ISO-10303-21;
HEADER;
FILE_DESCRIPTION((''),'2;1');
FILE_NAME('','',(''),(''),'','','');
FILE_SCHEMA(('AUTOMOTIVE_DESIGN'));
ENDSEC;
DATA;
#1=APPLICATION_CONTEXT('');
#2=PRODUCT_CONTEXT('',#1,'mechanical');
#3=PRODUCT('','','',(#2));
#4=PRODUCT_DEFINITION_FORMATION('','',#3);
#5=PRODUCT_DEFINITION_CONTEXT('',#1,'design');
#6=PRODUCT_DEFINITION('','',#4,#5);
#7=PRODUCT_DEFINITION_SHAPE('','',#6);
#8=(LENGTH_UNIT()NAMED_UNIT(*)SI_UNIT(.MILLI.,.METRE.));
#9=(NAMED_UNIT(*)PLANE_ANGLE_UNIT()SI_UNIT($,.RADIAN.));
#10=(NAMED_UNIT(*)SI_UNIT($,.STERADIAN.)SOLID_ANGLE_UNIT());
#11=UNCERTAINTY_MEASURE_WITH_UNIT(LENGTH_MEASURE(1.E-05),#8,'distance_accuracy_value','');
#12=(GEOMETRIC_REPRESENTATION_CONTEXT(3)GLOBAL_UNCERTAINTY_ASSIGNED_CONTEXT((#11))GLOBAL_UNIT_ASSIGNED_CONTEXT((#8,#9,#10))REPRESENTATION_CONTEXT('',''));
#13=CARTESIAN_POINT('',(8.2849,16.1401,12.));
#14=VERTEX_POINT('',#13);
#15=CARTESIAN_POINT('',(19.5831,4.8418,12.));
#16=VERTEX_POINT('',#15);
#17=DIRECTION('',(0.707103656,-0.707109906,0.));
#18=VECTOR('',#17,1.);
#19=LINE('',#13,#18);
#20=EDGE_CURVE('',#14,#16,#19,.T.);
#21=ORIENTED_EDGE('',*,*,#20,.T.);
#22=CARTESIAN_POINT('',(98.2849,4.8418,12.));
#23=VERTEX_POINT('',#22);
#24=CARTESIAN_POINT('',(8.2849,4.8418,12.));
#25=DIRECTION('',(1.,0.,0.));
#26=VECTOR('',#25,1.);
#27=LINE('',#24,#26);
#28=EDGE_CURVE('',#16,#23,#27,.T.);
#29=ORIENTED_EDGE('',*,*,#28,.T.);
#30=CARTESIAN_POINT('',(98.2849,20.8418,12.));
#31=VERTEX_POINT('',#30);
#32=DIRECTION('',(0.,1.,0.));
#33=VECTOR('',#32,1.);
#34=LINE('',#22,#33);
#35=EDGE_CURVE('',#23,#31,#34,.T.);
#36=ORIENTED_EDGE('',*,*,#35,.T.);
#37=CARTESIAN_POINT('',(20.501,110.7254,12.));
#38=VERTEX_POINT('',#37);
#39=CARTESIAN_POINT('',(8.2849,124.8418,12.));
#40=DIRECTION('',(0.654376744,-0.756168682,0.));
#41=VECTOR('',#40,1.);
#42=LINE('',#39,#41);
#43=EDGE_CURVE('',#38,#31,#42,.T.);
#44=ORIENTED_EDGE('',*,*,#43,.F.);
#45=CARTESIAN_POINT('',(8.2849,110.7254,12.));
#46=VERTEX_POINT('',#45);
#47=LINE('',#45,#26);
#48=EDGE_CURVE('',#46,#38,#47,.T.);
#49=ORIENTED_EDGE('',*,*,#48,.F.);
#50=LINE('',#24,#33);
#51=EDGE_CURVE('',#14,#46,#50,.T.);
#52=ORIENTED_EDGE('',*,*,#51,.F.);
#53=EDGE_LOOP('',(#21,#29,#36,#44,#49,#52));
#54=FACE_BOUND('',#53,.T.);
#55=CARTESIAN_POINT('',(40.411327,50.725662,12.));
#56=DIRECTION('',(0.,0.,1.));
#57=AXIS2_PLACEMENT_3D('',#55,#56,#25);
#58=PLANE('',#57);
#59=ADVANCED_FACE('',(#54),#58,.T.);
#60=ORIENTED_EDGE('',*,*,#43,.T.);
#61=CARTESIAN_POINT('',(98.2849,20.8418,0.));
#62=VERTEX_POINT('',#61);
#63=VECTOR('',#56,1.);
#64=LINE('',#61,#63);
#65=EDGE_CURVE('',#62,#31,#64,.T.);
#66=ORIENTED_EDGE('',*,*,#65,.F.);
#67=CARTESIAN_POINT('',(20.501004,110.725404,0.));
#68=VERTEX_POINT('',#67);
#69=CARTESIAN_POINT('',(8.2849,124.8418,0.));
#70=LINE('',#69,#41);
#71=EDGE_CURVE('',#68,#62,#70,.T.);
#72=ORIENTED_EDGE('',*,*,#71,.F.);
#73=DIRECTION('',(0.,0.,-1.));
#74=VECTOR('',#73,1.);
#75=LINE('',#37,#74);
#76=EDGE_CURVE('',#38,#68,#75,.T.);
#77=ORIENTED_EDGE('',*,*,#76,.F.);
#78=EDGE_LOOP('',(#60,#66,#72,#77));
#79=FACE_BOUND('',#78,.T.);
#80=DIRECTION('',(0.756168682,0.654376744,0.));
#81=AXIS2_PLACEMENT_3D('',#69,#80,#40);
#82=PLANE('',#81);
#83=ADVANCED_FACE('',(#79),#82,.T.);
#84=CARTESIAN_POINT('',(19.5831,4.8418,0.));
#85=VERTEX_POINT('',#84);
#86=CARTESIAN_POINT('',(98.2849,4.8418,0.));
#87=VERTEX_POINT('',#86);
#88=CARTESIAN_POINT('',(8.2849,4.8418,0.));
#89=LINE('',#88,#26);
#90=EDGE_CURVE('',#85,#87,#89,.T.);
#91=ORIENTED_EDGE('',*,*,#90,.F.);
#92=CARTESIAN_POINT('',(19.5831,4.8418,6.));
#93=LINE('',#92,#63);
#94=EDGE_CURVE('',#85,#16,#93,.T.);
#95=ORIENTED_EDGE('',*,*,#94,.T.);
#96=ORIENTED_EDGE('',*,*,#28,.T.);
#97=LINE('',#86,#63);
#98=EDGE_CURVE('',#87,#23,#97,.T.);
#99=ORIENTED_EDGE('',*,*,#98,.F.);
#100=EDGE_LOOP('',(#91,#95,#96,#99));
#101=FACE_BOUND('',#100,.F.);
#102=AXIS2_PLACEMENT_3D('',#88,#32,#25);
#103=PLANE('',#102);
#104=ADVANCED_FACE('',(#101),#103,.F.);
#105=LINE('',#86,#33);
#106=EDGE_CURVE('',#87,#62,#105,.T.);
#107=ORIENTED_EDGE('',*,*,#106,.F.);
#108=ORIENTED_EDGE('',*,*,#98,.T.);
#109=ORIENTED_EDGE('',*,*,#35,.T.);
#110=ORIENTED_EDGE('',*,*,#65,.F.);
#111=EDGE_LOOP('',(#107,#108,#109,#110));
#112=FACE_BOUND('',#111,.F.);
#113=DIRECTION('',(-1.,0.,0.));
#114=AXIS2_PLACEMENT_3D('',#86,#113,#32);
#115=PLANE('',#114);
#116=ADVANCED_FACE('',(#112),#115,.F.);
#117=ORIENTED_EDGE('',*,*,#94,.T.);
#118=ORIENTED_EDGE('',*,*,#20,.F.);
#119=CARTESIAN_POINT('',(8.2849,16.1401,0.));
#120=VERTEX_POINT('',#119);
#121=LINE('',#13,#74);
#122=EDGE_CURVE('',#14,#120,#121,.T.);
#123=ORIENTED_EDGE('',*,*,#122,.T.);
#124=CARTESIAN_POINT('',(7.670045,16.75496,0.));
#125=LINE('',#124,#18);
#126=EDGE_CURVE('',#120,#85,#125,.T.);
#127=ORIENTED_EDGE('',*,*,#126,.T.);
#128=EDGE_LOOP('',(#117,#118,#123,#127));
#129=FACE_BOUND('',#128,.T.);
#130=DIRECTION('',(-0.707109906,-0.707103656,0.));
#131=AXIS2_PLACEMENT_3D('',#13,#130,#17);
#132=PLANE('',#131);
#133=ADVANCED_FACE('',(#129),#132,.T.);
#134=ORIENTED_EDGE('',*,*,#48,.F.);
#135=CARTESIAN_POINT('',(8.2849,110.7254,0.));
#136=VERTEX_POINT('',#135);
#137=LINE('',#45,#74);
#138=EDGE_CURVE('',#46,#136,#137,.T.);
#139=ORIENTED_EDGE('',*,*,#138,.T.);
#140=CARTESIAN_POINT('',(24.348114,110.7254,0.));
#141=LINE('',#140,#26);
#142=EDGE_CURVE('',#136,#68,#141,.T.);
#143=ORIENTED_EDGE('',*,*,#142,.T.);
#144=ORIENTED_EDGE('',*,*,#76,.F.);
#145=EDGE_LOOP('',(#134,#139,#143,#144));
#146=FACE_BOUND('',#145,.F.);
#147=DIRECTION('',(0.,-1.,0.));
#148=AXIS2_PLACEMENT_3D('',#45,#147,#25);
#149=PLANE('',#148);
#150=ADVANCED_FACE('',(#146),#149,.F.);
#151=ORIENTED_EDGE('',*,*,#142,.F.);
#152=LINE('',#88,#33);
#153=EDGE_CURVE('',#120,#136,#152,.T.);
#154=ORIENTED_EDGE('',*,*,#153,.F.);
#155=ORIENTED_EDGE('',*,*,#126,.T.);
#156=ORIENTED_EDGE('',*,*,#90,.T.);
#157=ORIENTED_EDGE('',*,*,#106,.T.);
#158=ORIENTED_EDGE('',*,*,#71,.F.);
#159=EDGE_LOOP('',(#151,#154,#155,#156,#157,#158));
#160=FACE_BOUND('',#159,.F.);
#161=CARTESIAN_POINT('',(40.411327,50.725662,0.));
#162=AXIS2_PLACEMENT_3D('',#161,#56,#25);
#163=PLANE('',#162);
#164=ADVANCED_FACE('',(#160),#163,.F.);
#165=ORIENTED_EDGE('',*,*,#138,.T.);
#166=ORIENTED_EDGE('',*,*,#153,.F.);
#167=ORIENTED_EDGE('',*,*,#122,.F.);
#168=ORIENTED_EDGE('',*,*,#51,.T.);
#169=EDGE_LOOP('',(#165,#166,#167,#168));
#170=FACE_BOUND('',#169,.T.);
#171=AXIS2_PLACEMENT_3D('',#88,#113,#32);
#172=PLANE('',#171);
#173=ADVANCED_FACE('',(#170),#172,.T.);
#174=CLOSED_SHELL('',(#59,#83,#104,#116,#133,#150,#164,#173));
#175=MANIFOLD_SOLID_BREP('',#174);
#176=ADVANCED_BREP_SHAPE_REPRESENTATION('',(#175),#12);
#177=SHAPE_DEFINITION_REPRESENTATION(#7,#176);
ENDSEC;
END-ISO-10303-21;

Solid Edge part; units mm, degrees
sketch "Sketch1" plane through (0, 0, 0) normal (0, 0, 1) x (1, 0, 0)
  line L0 (8.2849, 4.8418) -> (98.2849, 4.8418)
  line L1 (98.2849, 4.8418) -> (98.2849, 20.8418)
  line L2 (8.2849, 124.8418) -> (98.2849, 20.8418)
  line L3 (8.2849, 4.8418) -> (8.2849, 124.8418)
extrude "Protrusion1" add sketch "Sketch1" along normal blind 12
sketch "Sketch2" plane through (53.2849, 64.8418, 12) normal (0, 0, 1) x (1, 0, 0)
  line L0 (-45, -48.7017) -> (-33.6863, -60.0155)
  line L1 (-33.6863, -60.0155) -> (-45, -60)
  line L2 (-45, -60) -> (-45, -48.7017)
  line L3 (-45, 45.8836) -> (-32.7839, 45.8836)
  line L4 (-32.7839, 45.8836) -> (-45, 60)
  line L5 (-45, 60) -> (-45, 45.8836)
extrude "ExtrudedCutout_1" cut sketch "Sketch2" against normal blind 382.4584
